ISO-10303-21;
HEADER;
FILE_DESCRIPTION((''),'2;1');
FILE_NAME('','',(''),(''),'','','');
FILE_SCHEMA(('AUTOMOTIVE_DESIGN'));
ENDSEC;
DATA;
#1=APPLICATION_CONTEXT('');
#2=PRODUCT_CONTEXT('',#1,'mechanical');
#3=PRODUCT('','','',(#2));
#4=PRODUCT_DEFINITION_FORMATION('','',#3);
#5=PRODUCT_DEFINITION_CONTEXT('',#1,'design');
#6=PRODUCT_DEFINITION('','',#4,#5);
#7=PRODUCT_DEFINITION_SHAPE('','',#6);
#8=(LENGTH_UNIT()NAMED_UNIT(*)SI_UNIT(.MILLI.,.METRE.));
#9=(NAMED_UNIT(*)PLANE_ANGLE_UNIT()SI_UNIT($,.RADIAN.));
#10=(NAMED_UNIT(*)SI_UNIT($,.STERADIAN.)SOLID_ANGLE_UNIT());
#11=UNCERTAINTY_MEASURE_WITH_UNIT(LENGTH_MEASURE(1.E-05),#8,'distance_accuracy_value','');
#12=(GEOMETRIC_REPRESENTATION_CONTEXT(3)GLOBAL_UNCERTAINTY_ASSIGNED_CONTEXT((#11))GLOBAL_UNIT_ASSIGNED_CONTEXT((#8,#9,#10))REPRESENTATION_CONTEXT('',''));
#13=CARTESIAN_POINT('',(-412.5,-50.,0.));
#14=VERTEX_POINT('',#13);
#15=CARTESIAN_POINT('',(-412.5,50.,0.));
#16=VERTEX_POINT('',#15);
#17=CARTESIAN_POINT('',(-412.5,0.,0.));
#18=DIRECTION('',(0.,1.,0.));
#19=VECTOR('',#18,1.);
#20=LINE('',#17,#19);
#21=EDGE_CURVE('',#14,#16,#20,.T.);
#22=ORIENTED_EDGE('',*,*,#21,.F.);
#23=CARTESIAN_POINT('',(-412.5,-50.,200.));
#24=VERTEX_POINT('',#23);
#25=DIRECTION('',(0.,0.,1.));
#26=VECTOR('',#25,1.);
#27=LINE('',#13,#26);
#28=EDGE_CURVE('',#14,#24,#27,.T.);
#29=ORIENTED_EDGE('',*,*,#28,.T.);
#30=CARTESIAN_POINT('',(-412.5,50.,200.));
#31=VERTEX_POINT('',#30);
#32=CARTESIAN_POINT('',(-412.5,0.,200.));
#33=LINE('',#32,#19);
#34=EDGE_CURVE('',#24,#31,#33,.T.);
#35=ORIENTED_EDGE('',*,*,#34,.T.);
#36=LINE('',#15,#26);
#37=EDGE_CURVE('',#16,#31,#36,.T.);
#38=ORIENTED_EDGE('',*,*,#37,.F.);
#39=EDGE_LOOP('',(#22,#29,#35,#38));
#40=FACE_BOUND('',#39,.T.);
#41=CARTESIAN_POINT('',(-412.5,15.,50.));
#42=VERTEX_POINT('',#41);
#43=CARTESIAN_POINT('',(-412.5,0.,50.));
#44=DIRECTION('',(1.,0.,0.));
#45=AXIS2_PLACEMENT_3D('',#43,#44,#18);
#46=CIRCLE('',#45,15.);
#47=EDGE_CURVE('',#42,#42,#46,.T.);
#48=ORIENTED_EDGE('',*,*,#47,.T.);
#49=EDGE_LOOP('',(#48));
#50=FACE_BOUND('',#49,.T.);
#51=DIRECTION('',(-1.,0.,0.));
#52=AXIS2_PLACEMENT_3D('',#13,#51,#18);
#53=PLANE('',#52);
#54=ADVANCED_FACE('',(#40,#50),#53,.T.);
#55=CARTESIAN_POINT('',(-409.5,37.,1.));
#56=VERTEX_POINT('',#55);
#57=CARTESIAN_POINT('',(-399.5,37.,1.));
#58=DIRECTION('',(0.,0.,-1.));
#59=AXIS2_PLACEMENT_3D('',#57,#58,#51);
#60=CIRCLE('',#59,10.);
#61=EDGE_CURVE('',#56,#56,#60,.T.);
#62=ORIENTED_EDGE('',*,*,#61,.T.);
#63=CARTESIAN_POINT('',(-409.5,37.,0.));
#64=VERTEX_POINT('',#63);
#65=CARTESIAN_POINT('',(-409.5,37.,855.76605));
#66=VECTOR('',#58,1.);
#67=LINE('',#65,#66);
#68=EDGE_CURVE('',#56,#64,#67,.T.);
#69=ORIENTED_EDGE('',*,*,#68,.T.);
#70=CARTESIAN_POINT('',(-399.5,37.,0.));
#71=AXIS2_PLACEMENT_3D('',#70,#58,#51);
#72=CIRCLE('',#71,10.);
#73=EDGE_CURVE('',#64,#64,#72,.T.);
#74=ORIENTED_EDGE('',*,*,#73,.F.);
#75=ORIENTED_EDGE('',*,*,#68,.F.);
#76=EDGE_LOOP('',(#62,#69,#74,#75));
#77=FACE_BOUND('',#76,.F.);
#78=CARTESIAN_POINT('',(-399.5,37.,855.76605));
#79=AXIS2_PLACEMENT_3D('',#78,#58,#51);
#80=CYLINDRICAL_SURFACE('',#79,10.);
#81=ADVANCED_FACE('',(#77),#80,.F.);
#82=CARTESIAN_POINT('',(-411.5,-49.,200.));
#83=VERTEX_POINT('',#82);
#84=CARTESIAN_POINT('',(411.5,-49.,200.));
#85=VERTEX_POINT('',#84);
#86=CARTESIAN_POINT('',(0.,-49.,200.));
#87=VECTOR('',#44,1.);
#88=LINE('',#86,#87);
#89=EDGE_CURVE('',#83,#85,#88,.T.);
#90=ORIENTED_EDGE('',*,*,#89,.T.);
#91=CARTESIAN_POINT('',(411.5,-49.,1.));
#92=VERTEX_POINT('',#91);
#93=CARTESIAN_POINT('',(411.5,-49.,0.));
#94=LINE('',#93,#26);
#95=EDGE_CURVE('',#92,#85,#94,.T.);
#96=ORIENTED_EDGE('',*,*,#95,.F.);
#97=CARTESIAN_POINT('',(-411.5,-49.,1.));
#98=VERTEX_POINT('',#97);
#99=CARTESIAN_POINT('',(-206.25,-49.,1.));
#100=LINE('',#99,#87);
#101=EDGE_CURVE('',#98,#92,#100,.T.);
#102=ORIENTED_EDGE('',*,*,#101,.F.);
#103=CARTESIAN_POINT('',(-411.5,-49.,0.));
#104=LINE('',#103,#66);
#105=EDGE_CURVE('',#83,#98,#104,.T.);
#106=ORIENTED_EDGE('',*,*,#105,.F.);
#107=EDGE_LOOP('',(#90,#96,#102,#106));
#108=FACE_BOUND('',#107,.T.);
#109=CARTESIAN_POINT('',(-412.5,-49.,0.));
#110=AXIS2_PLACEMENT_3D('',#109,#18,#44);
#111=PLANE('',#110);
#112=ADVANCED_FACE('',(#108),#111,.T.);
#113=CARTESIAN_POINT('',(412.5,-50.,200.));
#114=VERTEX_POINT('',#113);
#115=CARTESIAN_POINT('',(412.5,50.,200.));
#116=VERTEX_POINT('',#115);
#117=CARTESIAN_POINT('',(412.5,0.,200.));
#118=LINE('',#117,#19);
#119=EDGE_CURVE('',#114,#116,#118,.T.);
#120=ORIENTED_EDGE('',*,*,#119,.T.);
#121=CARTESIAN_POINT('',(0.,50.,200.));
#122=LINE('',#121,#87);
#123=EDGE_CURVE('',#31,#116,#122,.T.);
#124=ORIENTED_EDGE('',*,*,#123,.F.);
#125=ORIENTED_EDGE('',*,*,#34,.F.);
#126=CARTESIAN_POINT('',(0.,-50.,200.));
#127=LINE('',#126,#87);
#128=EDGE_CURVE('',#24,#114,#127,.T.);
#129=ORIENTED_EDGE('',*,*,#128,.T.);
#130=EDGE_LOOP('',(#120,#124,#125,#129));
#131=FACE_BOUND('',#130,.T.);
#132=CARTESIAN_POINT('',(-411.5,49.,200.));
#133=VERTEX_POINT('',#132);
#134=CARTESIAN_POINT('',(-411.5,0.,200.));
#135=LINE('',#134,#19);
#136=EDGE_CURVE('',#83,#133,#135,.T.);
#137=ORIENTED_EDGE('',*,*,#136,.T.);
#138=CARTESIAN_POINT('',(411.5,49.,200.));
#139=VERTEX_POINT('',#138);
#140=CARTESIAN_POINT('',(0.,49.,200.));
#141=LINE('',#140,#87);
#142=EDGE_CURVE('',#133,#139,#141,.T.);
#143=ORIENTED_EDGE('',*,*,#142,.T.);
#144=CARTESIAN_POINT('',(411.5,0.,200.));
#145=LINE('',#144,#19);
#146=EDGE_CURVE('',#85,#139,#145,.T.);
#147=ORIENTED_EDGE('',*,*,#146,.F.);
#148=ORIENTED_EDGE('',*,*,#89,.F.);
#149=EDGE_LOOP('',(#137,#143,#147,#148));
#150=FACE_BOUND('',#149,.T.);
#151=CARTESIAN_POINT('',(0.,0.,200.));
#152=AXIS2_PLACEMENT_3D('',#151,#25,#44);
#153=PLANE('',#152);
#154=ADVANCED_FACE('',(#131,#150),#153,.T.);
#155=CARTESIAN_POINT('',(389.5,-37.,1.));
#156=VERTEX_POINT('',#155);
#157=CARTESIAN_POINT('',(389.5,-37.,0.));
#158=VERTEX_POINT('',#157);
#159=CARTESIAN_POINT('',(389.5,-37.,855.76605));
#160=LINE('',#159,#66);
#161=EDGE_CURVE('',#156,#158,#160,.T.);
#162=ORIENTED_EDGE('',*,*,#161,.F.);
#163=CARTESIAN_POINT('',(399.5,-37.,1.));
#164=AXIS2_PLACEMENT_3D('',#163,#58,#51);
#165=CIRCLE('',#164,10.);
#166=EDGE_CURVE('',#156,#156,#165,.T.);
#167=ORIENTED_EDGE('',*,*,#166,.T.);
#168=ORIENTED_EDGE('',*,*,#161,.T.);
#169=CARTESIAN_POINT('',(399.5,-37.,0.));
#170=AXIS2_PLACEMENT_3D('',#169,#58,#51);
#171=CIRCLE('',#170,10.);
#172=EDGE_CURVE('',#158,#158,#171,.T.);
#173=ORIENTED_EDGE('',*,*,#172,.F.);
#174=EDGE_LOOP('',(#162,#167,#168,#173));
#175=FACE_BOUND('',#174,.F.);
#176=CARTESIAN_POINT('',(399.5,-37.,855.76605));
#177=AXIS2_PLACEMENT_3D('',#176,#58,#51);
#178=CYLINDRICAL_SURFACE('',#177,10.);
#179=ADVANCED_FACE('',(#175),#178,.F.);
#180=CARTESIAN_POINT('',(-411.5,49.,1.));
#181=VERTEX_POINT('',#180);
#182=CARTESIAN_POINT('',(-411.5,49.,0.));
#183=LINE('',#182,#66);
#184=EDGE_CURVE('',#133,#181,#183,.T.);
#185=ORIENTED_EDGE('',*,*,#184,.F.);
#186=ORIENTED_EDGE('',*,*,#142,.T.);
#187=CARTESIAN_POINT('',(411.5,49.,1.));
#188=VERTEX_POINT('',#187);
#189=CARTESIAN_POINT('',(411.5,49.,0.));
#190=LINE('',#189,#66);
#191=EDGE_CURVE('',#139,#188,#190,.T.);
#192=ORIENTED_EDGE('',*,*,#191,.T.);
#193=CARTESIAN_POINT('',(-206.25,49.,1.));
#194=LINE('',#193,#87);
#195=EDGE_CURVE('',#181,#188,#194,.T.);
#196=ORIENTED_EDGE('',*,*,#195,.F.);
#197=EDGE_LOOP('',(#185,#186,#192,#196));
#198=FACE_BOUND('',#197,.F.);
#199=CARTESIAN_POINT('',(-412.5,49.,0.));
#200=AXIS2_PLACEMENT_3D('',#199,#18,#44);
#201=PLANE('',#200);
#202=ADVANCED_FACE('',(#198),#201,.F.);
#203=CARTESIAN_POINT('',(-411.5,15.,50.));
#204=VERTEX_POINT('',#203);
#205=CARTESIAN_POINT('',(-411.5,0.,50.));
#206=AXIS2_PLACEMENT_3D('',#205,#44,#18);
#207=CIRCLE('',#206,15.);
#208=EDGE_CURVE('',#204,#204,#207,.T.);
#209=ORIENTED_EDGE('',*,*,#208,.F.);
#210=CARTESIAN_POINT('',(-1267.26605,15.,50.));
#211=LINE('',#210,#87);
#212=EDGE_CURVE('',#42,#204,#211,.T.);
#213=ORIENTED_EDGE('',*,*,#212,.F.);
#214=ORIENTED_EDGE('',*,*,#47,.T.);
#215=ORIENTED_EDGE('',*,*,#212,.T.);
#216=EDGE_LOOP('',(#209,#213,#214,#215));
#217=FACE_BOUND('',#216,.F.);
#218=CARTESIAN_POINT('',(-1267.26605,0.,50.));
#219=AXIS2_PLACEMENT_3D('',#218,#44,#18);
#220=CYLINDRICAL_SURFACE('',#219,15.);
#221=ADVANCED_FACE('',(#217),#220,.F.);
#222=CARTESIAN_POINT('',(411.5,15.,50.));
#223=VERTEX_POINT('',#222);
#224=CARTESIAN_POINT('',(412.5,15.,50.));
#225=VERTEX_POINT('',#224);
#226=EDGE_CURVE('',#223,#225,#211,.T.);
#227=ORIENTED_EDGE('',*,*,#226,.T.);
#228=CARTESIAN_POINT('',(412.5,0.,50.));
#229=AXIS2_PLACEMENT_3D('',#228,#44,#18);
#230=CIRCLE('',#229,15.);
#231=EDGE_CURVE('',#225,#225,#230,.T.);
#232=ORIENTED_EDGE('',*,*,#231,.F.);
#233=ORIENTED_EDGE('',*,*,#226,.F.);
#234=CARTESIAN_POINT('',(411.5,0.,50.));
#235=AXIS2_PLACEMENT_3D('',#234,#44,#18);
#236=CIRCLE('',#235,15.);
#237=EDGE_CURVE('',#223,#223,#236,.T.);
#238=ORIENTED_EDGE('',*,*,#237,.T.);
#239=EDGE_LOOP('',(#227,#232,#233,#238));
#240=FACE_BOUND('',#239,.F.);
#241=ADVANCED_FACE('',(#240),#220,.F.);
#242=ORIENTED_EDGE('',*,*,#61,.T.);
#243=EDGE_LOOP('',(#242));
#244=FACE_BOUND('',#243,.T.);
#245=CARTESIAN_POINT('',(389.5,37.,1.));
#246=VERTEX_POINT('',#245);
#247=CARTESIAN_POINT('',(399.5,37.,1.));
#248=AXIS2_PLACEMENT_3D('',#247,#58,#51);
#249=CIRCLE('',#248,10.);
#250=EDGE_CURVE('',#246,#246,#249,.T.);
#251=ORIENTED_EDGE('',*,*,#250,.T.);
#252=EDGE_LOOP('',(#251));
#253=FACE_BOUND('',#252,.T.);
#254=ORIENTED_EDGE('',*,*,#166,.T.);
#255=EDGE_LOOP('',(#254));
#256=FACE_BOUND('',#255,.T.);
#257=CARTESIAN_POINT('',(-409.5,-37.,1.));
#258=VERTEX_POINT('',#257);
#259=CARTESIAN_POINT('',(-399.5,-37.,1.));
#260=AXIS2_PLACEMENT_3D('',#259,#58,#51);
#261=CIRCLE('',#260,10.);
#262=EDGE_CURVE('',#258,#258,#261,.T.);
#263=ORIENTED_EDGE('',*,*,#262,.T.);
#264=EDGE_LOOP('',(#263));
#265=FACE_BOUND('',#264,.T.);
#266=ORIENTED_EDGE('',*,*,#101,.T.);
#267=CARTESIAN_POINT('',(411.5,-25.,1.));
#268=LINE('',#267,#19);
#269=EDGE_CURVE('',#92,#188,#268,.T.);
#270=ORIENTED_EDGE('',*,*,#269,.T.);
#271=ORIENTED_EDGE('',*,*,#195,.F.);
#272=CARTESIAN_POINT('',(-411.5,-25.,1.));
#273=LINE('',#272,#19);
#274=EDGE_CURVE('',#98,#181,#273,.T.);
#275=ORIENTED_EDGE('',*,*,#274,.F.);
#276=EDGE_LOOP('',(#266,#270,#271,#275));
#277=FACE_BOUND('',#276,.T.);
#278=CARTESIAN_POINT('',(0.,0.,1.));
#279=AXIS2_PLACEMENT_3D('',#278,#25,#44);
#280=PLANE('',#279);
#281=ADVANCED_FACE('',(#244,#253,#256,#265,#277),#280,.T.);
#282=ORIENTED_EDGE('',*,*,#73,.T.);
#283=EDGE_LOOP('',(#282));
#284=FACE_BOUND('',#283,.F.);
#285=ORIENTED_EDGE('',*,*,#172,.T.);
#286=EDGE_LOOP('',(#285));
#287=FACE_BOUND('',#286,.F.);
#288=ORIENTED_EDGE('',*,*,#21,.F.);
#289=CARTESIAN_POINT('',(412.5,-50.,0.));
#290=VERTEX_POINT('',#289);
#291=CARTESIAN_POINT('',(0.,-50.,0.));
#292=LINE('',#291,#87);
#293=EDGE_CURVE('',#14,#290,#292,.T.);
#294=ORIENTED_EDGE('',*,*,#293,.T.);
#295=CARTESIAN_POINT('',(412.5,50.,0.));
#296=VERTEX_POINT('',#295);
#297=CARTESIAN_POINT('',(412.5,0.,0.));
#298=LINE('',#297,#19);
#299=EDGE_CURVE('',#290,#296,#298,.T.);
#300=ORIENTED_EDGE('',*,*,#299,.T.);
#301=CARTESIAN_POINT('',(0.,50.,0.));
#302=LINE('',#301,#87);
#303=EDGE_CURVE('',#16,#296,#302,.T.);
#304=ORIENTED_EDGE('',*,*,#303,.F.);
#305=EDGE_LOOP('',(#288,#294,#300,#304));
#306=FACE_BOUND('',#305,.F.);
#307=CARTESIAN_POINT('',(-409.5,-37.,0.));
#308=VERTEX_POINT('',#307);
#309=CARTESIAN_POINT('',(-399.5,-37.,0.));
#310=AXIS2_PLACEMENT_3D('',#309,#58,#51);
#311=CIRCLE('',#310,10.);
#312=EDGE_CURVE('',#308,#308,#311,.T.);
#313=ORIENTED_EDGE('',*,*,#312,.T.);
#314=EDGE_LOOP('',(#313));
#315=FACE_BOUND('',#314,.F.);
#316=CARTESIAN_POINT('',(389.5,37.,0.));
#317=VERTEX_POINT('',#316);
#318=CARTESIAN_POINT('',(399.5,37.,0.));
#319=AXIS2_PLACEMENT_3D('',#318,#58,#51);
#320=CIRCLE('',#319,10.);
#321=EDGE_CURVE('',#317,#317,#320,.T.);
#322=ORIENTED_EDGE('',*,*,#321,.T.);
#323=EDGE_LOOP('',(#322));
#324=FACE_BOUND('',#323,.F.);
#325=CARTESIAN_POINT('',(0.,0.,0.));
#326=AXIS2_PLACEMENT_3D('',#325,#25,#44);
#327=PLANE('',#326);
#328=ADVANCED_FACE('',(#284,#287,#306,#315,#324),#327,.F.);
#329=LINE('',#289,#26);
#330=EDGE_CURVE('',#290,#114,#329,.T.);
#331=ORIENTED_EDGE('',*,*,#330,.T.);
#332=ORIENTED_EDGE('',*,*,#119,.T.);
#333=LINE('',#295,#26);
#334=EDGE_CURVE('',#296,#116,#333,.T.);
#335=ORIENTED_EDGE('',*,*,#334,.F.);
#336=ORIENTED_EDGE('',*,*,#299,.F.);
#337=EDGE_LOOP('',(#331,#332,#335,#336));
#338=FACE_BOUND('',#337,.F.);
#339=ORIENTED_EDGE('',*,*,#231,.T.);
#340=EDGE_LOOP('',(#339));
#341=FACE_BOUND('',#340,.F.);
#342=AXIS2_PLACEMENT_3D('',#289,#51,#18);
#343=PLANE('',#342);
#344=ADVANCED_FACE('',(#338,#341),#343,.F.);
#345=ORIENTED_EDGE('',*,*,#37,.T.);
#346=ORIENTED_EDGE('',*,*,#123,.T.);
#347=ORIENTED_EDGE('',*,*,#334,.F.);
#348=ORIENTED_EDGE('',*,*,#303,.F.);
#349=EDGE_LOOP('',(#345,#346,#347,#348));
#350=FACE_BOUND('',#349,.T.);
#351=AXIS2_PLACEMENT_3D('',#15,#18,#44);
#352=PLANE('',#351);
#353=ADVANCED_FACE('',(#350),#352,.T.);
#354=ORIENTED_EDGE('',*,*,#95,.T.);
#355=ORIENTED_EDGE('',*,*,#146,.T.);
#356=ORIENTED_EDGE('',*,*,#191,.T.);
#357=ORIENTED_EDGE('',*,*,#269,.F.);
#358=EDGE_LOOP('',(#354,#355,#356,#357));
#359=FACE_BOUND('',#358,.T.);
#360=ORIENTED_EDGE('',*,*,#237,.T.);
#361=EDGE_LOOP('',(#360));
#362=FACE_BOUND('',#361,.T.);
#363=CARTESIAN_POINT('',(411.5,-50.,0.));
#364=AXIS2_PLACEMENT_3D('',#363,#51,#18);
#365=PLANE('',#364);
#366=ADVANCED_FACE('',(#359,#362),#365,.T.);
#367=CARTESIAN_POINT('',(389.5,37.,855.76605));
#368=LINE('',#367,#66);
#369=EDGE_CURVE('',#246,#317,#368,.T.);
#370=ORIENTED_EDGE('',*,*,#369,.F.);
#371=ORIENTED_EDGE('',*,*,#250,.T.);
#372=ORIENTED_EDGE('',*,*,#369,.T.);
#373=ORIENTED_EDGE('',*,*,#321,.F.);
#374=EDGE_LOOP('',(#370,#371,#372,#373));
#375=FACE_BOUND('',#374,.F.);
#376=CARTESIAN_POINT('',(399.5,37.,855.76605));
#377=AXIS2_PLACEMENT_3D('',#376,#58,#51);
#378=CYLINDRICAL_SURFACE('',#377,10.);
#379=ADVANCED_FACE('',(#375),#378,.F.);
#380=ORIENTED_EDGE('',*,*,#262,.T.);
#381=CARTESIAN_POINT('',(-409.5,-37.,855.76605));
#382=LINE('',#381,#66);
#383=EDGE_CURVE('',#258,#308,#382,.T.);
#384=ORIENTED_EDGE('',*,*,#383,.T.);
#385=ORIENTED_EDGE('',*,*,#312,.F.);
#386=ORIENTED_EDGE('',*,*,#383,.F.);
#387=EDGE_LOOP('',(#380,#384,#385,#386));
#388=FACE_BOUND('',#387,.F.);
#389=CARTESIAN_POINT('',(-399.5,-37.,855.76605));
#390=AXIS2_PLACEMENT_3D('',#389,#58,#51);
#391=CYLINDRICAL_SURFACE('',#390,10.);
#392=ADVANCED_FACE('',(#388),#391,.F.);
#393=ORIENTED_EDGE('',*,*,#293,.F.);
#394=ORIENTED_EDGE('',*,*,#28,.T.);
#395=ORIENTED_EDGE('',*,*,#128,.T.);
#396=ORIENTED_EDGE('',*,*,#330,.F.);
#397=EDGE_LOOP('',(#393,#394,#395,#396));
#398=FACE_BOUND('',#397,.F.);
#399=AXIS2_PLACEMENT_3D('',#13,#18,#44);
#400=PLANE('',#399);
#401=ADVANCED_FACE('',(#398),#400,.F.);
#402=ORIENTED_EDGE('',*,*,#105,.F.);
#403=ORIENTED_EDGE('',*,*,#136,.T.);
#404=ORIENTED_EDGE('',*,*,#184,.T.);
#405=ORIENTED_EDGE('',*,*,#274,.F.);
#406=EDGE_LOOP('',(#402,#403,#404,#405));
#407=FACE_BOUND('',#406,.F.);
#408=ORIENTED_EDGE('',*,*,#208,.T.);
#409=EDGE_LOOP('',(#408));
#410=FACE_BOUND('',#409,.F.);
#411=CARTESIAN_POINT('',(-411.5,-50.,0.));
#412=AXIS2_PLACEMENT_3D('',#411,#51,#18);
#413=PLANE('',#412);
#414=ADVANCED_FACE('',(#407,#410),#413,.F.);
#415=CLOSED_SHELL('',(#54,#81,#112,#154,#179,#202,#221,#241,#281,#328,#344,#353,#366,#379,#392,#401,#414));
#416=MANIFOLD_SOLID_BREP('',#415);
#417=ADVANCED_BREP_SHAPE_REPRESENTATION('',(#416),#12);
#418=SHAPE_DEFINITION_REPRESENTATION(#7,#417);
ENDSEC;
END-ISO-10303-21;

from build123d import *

# Parameters (mm, degrees)
F0_W     = 825
F0_H     = 100
F1_DEPTH = 200
F2_T     = -1
F5_D     = 20
F8_D     = 30


# Not quite as in the source:
# - the program builds the solid bodies; features that only make, move or delete a surface that nothing else refers to are left out


with BuildPart() as f1:
    # F0 (on Top) → F1 (new body)
    with BuildSketch(Plane.XY):
        Rectangle(F0_W, F0_H)
    extrude(amount=F1_DEPTH)

    # F2
    f2_openings = [f1.faces().sort_by_distance(p)[0] for p in [
        (0, 0, 200),
    ]]
    offset(amount=F2_T, openings=f2_openings)

    # F5 (through all)
    with Locations(Plane.XY.offset(1)):
        with Locations((399.5, 37), (399.5, -37), (-399.5, 37), (-399.5, -37)):
            Hole(F5_D / 2)

    # F8 (through all)
    with Locations(Plane(origin=(-412.5, 0, 0), x_dir=(0, -1, 0), z_dir=(-1, 0, 0))):
        with Locations((0, 50)):
            Hole(F8_D / 2)


solid = f1.part
